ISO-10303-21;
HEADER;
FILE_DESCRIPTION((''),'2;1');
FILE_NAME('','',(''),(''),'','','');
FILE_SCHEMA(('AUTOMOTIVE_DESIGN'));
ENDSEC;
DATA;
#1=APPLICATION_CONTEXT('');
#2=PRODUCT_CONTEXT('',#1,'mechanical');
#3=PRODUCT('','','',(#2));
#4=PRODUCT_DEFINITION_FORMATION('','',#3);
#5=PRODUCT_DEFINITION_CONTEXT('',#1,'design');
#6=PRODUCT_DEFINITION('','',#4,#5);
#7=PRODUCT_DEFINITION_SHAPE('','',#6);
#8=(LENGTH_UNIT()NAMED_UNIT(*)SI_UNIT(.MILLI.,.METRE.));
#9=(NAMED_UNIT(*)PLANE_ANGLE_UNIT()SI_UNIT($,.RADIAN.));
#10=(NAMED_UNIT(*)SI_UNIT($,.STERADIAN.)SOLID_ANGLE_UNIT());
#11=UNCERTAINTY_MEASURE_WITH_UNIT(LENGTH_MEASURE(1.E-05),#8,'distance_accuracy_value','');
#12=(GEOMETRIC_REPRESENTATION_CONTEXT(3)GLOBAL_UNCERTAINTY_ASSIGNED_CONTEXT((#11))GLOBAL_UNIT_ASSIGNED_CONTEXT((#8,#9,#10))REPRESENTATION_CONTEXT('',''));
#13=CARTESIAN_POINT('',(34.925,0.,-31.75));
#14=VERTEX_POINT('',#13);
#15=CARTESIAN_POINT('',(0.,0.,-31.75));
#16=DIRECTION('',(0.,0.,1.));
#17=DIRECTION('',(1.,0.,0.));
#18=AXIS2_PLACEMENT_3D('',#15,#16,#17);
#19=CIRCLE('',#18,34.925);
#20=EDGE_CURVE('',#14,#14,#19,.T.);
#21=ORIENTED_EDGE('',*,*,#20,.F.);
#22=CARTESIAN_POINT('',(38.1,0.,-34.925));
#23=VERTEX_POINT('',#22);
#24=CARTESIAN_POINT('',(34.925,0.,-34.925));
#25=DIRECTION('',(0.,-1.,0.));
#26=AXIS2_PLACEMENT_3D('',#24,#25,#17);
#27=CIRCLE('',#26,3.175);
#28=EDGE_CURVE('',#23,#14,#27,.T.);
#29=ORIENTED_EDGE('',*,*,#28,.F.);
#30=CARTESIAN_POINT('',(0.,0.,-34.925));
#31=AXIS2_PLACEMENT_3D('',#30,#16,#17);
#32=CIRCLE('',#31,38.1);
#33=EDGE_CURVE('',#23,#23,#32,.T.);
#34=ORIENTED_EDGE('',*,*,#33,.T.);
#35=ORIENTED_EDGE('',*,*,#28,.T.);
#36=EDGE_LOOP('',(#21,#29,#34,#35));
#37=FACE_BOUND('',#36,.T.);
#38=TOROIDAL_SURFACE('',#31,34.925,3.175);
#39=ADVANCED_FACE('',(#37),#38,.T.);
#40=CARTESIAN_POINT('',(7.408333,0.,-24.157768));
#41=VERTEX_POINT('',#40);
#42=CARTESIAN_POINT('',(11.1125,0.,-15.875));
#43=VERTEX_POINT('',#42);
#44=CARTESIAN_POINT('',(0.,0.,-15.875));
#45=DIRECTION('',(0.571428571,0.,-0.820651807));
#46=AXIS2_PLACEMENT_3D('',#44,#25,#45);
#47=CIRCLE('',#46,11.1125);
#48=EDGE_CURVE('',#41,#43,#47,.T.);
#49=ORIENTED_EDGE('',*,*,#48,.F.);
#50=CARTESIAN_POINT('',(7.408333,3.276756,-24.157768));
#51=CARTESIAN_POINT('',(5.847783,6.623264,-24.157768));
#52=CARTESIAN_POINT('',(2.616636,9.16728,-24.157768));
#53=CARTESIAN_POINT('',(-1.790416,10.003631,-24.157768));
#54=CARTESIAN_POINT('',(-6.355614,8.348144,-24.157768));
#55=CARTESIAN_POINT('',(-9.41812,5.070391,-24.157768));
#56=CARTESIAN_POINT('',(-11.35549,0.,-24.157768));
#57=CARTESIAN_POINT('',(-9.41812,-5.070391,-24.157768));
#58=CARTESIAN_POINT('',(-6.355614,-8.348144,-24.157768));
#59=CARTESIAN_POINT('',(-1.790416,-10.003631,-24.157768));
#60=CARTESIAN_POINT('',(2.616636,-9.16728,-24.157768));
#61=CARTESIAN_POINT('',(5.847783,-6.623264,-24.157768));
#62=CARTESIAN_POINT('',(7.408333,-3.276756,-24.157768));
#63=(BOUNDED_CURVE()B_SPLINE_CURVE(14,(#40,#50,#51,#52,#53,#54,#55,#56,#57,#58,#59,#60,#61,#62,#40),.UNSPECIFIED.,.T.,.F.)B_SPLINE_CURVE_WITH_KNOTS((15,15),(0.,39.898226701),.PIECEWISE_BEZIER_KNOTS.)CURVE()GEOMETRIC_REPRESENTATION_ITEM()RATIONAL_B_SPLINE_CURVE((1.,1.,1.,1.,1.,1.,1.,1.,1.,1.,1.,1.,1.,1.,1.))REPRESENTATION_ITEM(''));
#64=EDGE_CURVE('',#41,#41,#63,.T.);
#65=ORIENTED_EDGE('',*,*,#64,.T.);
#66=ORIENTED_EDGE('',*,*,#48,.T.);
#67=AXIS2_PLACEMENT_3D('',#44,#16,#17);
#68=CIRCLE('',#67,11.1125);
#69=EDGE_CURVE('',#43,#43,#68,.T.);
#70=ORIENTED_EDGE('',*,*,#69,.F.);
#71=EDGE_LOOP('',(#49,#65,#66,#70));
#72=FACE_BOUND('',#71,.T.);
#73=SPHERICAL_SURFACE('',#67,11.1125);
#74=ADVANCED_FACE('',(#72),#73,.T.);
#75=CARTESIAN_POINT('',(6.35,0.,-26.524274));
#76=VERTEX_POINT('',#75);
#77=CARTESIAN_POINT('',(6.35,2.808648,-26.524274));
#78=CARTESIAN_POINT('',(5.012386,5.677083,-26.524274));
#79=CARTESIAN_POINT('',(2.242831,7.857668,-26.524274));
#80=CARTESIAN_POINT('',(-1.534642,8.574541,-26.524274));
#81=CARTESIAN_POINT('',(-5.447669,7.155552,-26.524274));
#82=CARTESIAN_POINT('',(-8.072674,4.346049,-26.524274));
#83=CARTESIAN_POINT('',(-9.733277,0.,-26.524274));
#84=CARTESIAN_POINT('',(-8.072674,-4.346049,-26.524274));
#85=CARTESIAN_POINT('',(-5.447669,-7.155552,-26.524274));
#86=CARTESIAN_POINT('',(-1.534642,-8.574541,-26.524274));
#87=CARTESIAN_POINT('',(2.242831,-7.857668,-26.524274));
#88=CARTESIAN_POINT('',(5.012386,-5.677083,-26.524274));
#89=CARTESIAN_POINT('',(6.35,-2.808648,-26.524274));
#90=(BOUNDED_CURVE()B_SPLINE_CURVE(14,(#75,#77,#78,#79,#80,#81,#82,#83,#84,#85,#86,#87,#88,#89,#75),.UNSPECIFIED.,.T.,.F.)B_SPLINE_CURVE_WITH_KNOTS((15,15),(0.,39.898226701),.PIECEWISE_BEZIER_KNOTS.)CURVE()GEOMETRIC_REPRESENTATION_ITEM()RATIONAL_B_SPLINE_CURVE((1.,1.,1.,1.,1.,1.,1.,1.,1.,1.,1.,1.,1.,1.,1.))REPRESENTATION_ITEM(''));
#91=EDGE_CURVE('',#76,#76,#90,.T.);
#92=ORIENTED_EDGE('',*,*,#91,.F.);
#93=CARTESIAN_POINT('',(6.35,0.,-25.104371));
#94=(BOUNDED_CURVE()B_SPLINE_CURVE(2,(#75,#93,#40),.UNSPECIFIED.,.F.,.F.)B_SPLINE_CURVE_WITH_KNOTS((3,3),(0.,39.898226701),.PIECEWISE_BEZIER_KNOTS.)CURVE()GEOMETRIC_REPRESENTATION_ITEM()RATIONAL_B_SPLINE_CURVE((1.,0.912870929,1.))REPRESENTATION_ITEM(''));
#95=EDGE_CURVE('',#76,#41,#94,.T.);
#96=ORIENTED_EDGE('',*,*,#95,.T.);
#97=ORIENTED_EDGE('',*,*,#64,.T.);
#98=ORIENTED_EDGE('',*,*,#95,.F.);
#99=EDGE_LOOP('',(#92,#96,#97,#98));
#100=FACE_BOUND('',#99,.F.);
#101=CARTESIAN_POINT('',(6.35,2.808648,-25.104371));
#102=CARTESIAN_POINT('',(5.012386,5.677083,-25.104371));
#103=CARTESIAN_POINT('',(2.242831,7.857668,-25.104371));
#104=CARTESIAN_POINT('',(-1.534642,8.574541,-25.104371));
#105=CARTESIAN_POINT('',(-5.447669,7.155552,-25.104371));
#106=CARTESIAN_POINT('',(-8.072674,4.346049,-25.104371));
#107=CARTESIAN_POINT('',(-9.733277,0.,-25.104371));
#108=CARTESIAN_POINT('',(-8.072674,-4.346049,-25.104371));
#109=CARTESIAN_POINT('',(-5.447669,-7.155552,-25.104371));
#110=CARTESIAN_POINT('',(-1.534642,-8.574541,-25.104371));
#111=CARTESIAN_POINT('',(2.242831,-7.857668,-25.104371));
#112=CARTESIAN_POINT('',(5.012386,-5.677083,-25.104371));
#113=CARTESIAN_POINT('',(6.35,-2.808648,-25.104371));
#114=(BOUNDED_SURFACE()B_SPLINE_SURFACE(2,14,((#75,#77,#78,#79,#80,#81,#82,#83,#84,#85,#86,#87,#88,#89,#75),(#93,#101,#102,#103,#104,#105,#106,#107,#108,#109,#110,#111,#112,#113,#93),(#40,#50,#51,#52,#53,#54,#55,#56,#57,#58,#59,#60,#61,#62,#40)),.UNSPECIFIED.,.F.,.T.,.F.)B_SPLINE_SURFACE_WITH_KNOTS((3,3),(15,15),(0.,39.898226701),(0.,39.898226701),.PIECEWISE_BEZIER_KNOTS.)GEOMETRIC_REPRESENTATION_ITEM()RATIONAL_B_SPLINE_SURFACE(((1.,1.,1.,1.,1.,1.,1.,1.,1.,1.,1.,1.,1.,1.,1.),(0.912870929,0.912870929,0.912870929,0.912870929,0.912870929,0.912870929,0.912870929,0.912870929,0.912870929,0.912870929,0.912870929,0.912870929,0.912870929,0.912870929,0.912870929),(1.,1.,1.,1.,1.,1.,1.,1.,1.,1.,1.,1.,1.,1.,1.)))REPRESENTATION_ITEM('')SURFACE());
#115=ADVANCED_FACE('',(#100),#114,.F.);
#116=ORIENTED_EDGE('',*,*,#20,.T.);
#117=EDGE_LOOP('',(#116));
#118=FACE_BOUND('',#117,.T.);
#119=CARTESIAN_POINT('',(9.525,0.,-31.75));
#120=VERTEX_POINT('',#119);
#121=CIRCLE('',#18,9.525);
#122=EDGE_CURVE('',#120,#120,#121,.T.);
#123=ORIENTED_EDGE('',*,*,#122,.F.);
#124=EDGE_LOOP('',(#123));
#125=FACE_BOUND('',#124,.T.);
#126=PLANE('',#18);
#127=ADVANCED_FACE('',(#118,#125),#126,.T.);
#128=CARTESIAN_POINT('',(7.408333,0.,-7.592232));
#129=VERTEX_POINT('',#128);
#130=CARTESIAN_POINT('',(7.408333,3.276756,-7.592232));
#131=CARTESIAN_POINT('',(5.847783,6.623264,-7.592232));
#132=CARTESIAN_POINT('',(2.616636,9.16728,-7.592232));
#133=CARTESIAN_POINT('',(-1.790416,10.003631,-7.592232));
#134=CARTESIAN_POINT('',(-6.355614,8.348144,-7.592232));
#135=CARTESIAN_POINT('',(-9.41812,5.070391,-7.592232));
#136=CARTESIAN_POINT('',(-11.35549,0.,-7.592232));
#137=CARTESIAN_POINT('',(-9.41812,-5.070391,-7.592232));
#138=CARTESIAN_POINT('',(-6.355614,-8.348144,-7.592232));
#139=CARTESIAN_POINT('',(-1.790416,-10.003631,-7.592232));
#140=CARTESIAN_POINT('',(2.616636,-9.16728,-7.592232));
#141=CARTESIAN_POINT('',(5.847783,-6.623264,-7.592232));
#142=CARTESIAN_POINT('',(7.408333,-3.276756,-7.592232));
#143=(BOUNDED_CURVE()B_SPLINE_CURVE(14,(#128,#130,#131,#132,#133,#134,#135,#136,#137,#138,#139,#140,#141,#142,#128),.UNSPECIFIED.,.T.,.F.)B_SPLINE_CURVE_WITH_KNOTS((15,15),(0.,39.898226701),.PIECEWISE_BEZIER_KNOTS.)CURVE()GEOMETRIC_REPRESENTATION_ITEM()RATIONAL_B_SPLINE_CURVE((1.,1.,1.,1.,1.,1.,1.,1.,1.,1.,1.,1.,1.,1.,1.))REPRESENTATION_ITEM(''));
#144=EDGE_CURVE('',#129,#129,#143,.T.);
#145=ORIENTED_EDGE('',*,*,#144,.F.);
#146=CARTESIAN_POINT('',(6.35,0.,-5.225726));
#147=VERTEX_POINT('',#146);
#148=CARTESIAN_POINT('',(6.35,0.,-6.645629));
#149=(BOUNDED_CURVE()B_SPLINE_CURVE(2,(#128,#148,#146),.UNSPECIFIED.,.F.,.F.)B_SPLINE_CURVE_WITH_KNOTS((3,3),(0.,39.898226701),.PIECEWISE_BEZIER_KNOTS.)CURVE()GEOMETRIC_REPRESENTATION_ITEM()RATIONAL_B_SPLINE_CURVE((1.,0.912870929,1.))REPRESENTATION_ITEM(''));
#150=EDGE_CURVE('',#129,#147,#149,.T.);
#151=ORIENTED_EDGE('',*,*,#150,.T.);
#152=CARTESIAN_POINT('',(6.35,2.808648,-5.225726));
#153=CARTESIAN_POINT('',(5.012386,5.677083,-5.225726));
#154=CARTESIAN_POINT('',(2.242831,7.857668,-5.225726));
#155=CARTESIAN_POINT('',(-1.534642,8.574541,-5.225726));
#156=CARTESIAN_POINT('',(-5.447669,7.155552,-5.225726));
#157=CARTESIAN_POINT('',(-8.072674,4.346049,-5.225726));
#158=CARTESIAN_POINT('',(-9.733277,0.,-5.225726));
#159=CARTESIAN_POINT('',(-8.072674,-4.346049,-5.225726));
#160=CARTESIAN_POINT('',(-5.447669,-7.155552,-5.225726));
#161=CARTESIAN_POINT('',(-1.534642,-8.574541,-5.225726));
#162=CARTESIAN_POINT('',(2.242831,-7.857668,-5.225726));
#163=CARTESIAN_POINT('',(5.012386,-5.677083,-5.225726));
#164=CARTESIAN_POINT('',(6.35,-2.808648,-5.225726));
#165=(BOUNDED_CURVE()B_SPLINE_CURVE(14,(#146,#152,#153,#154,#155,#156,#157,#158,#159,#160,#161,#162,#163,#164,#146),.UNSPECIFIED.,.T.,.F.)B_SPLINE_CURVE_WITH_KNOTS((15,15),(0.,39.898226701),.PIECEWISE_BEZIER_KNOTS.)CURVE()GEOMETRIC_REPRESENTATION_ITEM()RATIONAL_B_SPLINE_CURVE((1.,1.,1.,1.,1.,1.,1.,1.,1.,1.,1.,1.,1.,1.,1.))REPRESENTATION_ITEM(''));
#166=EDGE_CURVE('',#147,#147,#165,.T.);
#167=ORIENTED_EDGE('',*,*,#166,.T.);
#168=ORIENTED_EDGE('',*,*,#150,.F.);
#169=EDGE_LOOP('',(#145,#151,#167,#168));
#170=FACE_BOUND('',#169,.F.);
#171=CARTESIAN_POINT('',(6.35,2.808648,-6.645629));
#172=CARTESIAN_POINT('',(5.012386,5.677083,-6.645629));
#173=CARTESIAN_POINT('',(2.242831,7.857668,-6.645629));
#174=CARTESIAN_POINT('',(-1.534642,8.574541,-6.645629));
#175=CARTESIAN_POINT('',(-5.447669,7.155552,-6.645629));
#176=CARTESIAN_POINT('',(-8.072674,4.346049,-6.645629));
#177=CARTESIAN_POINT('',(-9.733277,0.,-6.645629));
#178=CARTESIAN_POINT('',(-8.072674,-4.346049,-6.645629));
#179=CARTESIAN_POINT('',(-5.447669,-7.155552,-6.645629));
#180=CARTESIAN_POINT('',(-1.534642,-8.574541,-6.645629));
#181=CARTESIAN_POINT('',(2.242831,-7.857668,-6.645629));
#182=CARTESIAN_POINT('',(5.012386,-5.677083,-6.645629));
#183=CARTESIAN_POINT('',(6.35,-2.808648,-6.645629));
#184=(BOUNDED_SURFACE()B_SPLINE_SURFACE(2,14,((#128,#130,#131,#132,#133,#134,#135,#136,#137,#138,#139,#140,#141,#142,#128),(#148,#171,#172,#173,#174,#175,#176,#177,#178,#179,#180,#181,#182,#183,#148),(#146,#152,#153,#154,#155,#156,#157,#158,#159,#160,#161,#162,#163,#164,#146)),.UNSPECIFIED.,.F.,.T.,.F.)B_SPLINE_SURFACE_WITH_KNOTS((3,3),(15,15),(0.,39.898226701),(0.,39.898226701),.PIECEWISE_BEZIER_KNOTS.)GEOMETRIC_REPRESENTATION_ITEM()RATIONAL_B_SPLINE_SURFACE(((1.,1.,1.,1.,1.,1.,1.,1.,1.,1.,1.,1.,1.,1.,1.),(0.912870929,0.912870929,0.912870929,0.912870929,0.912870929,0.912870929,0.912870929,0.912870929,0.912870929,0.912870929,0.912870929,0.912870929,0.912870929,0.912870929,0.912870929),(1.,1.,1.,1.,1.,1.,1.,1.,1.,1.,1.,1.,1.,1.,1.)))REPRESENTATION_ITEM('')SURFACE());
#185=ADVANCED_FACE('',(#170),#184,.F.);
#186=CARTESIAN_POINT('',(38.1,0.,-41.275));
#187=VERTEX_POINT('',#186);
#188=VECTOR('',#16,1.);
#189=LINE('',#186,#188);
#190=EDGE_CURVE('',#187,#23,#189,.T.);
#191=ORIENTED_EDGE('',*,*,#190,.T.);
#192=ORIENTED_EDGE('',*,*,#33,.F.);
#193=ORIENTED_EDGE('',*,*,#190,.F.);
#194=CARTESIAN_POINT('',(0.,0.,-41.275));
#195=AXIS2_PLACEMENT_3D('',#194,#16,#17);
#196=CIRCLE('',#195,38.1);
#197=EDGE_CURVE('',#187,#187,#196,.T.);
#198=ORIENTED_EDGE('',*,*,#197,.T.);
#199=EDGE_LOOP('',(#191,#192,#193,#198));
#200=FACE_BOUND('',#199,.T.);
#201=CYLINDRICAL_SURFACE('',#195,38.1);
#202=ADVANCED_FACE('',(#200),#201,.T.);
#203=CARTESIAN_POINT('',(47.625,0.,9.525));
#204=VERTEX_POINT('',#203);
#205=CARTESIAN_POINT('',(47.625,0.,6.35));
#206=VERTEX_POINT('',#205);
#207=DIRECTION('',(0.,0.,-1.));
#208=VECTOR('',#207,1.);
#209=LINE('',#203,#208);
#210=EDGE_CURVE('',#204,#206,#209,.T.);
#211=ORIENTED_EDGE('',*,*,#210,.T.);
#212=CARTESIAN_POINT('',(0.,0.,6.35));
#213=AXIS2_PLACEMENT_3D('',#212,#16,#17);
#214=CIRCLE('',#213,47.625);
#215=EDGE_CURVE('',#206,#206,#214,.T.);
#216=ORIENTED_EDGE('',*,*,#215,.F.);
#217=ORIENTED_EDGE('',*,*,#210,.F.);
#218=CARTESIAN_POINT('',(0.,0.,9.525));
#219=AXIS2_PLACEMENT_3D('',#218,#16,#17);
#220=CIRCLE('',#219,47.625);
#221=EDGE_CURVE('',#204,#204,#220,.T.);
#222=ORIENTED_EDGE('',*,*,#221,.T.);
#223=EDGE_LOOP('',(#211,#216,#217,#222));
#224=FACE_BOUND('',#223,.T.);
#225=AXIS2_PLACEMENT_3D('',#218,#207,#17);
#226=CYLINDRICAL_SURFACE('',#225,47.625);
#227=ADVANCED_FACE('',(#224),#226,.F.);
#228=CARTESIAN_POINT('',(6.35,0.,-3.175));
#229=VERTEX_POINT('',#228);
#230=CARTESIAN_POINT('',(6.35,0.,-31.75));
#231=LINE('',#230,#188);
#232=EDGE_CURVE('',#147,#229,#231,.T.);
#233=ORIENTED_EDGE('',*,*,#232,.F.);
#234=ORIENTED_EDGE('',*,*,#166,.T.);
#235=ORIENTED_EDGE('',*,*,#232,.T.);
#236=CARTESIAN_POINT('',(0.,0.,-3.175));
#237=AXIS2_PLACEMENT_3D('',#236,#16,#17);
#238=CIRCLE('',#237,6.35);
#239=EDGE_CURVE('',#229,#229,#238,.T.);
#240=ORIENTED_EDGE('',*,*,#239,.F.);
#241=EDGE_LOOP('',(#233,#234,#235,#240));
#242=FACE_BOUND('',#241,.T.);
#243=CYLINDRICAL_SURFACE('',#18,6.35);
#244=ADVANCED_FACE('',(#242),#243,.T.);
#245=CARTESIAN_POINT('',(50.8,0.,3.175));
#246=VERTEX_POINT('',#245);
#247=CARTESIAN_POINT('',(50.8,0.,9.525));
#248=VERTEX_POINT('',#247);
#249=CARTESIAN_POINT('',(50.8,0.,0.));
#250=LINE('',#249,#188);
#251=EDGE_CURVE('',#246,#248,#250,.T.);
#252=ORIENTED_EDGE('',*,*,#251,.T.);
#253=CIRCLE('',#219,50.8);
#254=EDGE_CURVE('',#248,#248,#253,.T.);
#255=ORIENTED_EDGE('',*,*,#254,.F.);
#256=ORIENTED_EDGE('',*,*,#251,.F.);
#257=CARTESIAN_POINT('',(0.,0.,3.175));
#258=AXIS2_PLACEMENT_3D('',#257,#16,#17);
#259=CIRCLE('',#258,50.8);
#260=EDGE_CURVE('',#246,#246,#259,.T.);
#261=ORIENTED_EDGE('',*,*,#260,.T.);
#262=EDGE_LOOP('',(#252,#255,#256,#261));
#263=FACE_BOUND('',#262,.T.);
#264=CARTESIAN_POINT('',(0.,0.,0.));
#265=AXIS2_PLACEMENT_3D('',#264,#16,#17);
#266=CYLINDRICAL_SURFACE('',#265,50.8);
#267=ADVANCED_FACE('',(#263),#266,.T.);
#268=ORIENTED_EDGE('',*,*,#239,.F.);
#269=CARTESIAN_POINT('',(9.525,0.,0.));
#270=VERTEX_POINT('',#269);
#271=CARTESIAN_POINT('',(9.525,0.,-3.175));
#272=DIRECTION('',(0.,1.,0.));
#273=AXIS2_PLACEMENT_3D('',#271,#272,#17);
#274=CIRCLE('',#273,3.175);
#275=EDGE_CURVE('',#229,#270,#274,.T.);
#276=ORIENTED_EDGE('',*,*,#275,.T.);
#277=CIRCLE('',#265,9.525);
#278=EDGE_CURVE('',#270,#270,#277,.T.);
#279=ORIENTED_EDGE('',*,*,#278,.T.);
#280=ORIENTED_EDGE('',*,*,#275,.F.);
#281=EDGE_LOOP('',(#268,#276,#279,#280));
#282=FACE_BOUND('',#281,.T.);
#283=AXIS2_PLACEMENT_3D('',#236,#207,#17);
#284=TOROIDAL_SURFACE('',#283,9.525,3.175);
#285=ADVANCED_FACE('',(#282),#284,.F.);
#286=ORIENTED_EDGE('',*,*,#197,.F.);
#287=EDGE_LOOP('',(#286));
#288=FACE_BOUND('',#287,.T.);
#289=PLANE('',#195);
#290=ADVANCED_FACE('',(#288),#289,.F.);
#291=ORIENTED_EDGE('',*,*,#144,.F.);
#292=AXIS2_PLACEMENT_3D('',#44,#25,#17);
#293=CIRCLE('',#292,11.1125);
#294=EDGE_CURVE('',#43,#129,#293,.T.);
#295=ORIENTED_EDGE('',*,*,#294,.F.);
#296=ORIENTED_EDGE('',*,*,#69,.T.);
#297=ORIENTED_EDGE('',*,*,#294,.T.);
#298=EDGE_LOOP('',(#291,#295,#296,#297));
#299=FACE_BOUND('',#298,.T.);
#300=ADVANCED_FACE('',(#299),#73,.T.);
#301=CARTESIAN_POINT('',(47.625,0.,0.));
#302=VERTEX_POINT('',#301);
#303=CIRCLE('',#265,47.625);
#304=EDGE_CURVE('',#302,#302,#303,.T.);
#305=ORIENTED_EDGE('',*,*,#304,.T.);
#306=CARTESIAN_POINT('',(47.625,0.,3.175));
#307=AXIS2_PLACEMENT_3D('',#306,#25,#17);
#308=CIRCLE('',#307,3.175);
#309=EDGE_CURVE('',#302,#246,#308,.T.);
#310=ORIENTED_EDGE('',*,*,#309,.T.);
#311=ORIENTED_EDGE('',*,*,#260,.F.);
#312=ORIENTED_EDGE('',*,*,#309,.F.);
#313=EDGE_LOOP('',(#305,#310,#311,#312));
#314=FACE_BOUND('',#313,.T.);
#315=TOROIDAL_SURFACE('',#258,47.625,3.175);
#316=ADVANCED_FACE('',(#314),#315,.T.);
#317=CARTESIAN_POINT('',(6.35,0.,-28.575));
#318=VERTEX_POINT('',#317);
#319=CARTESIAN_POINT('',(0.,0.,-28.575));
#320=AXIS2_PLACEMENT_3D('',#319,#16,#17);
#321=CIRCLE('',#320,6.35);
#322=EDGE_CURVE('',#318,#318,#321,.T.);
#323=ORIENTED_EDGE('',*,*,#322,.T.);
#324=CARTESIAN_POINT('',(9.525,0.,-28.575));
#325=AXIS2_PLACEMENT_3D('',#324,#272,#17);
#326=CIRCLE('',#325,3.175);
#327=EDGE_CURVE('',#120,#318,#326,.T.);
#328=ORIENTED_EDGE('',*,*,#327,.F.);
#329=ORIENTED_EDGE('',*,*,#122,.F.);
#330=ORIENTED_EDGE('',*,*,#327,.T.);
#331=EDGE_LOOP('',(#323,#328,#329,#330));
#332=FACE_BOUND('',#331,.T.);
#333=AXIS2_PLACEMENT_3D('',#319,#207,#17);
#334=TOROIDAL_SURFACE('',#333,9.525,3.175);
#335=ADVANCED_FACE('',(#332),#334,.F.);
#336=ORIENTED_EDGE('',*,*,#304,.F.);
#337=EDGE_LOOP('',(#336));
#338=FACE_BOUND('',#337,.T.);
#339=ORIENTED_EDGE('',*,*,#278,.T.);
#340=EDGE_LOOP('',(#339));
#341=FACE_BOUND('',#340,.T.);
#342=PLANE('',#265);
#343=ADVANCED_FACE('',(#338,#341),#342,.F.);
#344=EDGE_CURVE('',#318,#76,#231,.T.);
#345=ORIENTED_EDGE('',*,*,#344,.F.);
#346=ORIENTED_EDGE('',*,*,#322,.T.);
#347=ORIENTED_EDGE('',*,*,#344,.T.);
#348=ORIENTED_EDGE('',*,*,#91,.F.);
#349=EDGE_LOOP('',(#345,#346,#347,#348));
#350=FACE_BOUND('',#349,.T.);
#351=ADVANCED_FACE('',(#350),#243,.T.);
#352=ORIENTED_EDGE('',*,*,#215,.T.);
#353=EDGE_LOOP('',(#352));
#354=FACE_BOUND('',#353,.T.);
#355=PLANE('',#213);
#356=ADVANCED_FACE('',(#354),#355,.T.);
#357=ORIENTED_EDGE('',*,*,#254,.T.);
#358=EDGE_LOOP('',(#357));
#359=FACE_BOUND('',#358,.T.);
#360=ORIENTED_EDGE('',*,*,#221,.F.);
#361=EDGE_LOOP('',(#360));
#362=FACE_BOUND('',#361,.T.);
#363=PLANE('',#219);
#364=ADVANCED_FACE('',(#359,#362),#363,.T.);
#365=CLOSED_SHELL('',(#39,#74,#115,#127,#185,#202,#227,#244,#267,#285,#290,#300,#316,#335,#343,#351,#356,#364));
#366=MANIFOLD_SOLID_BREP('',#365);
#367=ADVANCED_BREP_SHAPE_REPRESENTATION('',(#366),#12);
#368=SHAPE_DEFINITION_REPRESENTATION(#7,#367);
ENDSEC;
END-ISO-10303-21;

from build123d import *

# Parameters (mm, degrees)
F2_R = 3.175


# Not quite as in the source:
# - a feature names something its author has since deleted; it is built from what else it names


with BuildPart() as f1:
    # F0 (on Front) → F1 (revolve)
    with BuildSketch(Plane.XZ):
        Polygon((0, 6.35), (0, 0), (6.35, 0), (50.8, 0), (50.8, 9.525), (47.625, 9.525), (47.625, 6.35), align=None)
        Polygon((6.35, -31.75), (0, -31.75), (0, -41.275), (38.1, -41.275), (38.1, -31.75), align=None)
        with BuildLine():
            Line((6.35, 0), (0, 0))
            Line((0, 0), (0, -4.7625))
            ThreePointArc((0, -4.7625), (3.3277085246, -5.2724525596), (6.35, -6.7555067986))
            Line((6.35, -6.7555067986), (6.35, 0))
        make_face()
        with BuildLine():
            ThreePointArc((6.35, -24.9944932014), (3.3277085246, -26.4775474404), (0, -26.9875))
            Line((0, -26.9875), (0, -31.75))
            Line((0, -31.75), (6.35, -31.75))
            Line((6.35, -31.75), (6.35, -24.9944932014))
        make_face()
        with BuildLine():
            ThreePointArc((6.35, -6.7555067986), (3.3277085246, -5.2724525596), (0, -4.7625))
            Line((0, -4.7625), (0, -26.9875))
            ThreePointArc((0, -26.9875), (3.3277085246, -26.4775474404), (6.35, -24.9944932014))
            Line((6.35, -24.9944932014), (6.35, -6.7555067986))
        make_face()
        with BuildLine():
            ThreePointArc((11.1125, -15.875), (9.8501784565, -10.7309120706), (6.35, -6.7555067986))
            Line((6.35, -6.7555067986), (6.35, -24.9944932014))
            ThreePointArc((6.35, -24.9944932014), (9.8501784565, -21.0190879294), (11.1125, -15.875))
        make_face()
    revolve(axis=Axis((0, 0, 19.689680915), (0, 0, 1)))

    # F2
    f2_edges = [f1.edges().sort_by_distance(p)[0] for p in [
        (-6.35, 0, 0),
        (-6.35, 0, -6.755507),
        (11.1125, 0, -15.875),
        (6.35, 0, -3.377753),
        (-6.35, 0, -24.994493),
        (6.35, 0, -28.372247),
        (-6.35, 0, -31.75),
        (-50.8, 0, 0),
        (-38.1, 0, -31.75),
    ]]
    fillet(f2_edges, radius=F2_R)


solid = f1.part
